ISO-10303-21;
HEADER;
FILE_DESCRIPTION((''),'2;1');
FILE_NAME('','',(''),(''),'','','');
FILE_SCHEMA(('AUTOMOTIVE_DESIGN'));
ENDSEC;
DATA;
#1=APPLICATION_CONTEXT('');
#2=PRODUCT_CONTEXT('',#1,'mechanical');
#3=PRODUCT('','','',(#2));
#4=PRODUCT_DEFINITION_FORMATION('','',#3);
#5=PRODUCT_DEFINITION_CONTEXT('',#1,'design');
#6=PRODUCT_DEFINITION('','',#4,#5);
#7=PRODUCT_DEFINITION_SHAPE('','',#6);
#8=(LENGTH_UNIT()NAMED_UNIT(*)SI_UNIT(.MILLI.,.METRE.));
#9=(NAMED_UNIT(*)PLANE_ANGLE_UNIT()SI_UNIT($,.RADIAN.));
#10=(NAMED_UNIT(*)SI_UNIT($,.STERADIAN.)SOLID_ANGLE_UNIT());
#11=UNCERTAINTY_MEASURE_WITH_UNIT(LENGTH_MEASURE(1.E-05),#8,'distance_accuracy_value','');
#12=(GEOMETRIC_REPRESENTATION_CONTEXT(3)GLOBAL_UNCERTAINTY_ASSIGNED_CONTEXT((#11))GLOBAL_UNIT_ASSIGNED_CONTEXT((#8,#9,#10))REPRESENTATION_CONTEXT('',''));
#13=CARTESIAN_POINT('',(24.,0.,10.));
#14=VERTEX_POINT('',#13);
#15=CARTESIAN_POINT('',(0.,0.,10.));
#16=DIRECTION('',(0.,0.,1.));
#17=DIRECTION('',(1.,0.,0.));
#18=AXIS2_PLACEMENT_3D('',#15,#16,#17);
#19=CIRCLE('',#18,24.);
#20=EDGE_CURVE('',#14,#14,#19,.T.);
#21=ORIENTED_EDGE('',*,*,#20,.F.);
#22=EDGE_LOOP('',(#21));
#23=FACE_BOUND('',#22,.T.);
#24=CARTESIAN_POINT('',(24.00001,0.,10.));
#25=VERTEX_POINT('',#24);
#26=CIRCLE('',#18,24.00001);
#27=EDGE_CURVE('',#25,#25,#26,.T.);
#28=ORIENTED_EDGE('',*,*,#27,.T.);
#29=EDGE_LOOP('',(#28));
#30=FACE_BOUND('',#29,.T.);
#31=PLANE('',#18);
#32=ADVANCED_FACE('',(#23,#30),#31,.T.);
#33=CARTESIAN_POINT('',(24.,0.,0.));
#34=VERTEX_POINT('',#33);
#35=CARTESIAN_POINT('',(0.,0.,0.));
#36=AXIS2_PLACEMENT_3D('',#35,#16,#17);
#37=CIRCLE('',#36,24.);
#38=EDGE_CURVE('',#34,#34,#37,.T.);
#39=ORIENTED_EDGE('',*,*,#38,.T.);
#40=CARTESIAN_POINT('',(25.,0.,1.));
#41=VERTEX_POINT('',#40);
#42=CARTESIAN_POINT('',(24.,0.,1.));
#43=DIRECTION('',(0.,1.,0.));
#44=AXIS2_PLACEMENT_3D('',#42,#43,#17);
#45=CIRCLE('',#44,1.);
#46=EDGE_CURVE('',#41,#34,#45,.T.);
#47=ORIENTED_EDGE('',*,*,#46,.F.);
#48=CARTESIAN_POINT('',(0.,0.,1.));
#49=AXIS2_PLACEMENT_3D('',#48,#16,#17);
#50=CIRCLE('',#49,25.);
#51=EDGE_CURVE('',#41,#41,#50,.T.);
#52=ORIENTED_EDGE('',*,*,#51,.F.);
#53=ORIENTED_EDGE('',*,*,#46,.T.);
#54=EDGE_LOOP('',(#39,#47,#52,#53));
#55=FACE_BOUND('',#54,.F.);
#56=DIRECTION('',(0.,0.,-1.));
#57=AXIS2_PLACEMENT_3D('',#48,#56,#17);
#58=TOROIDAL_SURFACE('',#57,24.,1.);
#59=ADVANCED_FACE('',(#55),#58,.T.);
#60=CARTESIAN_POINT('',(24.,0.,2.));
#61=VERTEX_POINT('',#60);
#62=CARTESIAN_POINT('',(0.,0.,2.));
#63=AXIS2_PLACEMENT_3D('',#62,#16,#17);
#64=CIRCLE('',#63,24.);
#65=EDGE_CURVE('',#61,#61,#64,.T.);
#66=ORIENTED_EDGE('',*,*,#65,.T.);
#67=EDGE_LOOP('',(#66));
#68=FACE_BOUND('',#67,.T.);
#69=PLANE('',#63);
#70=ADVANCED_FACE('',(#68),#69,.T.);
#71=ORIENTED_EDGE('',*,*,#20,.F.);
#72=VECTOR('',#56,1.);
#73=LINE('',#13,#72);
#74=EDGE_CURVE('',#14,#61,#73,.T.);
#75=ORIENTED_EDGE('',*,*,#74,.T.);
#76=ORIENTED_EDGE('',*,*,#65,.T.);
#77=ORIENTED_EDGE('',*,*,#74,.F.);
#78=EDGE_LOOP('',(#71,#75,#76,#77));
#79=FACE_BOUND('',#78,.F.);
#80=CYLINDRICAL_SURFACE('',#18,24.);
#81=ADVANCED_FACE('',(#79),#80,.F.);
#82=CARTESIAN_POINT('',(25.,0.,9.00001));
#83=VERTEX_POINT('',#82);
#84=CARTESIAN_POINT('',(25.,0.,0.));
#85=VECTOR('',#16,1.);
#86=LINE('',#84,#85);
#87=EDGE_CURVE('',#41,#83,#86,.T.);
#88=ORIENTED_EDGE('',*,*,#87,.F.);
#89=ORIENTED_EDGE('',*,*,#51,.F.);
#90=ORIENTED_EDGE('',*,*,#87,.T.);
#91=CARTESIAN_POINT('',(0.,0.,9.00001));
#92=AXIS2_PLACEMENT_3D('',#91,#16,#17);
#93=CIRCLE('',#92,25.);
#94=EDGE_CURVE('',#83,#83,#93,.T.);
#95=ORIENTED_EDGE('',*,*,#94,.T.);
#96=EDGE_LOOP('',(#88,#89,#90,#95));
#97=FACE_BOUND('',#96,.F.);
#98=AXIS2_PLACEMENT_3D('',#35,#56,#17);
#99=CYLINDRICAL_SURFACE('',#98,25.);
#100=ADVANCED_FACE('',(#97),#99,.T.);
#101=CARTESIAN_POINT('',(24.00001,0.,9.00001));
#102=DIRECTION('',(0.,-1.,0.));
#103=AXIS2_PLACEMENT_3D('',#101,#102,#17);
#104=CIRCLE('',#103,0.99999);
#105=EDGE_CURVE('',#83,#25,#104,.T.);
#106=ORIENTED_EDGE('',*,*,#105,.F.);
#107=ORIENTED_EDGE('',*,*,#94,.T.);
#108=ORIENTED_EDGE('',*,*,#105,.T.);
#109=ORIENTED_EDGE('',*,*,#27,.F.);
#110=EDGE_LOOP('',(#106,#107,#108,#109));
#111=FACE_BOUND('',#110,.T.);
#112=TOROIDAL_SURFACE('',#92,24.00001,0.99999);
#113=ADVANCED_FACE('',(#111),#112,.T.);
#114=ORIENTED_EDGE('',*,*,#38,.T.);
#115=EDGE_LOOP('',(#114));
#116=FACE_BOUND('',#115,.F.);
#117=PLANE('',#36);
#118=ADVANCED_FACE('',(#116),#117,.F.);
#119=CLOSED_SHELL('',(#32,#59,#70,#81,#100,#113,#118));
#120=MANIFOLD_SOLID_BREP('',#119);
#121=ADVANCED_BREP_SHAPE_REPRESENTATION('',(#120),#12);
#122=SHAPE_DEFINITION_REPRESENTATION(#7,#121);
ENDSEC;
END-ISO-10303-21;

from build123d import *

# Parameters (mm, degrees)
F0_R     = 25
F1_DEPTH = 10
F2_R     = 24
F3_DEPTH = 8
F4_R     = 0.99999
F5_R     = 1


# Not quite as in the source:
# - a fillet or chamfer is up to 0.001 mm smaller than in the source, because OpenCascade refuses the exact size


with BuildPart() as f1:
    # F0 (on Top) → F1 (new body)
    with BuildSketch(Plane.XY):
        Circle(F0_R)
    extrude(amount=F1_DEPTH)

    # F2 (on face) → F3 (cut)
    with BuildSketch(Plane.XY.offset(10)):
        Circle(F2_R)
    extrude(amount=-F3_DEPTH, mode=Mode.SUBTRACT)

    # F4 (radius 1 in the source; OpenCascade refuses exactly that, so slightly less here)
    f4_edges = [f1.edges().sort_by_distance(p)[0] for p in [
        (-25, 0, 10),
    ]]
    fillet(f4_edges, radius=F4_R)

    # F5
    f5_edges = [f1.edges().sort_by_distance(p)[0] for p in [
        (-25, 0, 0),
    ]]
    fillet(f5_edges, radius=F5_R)


solid = f1.part
